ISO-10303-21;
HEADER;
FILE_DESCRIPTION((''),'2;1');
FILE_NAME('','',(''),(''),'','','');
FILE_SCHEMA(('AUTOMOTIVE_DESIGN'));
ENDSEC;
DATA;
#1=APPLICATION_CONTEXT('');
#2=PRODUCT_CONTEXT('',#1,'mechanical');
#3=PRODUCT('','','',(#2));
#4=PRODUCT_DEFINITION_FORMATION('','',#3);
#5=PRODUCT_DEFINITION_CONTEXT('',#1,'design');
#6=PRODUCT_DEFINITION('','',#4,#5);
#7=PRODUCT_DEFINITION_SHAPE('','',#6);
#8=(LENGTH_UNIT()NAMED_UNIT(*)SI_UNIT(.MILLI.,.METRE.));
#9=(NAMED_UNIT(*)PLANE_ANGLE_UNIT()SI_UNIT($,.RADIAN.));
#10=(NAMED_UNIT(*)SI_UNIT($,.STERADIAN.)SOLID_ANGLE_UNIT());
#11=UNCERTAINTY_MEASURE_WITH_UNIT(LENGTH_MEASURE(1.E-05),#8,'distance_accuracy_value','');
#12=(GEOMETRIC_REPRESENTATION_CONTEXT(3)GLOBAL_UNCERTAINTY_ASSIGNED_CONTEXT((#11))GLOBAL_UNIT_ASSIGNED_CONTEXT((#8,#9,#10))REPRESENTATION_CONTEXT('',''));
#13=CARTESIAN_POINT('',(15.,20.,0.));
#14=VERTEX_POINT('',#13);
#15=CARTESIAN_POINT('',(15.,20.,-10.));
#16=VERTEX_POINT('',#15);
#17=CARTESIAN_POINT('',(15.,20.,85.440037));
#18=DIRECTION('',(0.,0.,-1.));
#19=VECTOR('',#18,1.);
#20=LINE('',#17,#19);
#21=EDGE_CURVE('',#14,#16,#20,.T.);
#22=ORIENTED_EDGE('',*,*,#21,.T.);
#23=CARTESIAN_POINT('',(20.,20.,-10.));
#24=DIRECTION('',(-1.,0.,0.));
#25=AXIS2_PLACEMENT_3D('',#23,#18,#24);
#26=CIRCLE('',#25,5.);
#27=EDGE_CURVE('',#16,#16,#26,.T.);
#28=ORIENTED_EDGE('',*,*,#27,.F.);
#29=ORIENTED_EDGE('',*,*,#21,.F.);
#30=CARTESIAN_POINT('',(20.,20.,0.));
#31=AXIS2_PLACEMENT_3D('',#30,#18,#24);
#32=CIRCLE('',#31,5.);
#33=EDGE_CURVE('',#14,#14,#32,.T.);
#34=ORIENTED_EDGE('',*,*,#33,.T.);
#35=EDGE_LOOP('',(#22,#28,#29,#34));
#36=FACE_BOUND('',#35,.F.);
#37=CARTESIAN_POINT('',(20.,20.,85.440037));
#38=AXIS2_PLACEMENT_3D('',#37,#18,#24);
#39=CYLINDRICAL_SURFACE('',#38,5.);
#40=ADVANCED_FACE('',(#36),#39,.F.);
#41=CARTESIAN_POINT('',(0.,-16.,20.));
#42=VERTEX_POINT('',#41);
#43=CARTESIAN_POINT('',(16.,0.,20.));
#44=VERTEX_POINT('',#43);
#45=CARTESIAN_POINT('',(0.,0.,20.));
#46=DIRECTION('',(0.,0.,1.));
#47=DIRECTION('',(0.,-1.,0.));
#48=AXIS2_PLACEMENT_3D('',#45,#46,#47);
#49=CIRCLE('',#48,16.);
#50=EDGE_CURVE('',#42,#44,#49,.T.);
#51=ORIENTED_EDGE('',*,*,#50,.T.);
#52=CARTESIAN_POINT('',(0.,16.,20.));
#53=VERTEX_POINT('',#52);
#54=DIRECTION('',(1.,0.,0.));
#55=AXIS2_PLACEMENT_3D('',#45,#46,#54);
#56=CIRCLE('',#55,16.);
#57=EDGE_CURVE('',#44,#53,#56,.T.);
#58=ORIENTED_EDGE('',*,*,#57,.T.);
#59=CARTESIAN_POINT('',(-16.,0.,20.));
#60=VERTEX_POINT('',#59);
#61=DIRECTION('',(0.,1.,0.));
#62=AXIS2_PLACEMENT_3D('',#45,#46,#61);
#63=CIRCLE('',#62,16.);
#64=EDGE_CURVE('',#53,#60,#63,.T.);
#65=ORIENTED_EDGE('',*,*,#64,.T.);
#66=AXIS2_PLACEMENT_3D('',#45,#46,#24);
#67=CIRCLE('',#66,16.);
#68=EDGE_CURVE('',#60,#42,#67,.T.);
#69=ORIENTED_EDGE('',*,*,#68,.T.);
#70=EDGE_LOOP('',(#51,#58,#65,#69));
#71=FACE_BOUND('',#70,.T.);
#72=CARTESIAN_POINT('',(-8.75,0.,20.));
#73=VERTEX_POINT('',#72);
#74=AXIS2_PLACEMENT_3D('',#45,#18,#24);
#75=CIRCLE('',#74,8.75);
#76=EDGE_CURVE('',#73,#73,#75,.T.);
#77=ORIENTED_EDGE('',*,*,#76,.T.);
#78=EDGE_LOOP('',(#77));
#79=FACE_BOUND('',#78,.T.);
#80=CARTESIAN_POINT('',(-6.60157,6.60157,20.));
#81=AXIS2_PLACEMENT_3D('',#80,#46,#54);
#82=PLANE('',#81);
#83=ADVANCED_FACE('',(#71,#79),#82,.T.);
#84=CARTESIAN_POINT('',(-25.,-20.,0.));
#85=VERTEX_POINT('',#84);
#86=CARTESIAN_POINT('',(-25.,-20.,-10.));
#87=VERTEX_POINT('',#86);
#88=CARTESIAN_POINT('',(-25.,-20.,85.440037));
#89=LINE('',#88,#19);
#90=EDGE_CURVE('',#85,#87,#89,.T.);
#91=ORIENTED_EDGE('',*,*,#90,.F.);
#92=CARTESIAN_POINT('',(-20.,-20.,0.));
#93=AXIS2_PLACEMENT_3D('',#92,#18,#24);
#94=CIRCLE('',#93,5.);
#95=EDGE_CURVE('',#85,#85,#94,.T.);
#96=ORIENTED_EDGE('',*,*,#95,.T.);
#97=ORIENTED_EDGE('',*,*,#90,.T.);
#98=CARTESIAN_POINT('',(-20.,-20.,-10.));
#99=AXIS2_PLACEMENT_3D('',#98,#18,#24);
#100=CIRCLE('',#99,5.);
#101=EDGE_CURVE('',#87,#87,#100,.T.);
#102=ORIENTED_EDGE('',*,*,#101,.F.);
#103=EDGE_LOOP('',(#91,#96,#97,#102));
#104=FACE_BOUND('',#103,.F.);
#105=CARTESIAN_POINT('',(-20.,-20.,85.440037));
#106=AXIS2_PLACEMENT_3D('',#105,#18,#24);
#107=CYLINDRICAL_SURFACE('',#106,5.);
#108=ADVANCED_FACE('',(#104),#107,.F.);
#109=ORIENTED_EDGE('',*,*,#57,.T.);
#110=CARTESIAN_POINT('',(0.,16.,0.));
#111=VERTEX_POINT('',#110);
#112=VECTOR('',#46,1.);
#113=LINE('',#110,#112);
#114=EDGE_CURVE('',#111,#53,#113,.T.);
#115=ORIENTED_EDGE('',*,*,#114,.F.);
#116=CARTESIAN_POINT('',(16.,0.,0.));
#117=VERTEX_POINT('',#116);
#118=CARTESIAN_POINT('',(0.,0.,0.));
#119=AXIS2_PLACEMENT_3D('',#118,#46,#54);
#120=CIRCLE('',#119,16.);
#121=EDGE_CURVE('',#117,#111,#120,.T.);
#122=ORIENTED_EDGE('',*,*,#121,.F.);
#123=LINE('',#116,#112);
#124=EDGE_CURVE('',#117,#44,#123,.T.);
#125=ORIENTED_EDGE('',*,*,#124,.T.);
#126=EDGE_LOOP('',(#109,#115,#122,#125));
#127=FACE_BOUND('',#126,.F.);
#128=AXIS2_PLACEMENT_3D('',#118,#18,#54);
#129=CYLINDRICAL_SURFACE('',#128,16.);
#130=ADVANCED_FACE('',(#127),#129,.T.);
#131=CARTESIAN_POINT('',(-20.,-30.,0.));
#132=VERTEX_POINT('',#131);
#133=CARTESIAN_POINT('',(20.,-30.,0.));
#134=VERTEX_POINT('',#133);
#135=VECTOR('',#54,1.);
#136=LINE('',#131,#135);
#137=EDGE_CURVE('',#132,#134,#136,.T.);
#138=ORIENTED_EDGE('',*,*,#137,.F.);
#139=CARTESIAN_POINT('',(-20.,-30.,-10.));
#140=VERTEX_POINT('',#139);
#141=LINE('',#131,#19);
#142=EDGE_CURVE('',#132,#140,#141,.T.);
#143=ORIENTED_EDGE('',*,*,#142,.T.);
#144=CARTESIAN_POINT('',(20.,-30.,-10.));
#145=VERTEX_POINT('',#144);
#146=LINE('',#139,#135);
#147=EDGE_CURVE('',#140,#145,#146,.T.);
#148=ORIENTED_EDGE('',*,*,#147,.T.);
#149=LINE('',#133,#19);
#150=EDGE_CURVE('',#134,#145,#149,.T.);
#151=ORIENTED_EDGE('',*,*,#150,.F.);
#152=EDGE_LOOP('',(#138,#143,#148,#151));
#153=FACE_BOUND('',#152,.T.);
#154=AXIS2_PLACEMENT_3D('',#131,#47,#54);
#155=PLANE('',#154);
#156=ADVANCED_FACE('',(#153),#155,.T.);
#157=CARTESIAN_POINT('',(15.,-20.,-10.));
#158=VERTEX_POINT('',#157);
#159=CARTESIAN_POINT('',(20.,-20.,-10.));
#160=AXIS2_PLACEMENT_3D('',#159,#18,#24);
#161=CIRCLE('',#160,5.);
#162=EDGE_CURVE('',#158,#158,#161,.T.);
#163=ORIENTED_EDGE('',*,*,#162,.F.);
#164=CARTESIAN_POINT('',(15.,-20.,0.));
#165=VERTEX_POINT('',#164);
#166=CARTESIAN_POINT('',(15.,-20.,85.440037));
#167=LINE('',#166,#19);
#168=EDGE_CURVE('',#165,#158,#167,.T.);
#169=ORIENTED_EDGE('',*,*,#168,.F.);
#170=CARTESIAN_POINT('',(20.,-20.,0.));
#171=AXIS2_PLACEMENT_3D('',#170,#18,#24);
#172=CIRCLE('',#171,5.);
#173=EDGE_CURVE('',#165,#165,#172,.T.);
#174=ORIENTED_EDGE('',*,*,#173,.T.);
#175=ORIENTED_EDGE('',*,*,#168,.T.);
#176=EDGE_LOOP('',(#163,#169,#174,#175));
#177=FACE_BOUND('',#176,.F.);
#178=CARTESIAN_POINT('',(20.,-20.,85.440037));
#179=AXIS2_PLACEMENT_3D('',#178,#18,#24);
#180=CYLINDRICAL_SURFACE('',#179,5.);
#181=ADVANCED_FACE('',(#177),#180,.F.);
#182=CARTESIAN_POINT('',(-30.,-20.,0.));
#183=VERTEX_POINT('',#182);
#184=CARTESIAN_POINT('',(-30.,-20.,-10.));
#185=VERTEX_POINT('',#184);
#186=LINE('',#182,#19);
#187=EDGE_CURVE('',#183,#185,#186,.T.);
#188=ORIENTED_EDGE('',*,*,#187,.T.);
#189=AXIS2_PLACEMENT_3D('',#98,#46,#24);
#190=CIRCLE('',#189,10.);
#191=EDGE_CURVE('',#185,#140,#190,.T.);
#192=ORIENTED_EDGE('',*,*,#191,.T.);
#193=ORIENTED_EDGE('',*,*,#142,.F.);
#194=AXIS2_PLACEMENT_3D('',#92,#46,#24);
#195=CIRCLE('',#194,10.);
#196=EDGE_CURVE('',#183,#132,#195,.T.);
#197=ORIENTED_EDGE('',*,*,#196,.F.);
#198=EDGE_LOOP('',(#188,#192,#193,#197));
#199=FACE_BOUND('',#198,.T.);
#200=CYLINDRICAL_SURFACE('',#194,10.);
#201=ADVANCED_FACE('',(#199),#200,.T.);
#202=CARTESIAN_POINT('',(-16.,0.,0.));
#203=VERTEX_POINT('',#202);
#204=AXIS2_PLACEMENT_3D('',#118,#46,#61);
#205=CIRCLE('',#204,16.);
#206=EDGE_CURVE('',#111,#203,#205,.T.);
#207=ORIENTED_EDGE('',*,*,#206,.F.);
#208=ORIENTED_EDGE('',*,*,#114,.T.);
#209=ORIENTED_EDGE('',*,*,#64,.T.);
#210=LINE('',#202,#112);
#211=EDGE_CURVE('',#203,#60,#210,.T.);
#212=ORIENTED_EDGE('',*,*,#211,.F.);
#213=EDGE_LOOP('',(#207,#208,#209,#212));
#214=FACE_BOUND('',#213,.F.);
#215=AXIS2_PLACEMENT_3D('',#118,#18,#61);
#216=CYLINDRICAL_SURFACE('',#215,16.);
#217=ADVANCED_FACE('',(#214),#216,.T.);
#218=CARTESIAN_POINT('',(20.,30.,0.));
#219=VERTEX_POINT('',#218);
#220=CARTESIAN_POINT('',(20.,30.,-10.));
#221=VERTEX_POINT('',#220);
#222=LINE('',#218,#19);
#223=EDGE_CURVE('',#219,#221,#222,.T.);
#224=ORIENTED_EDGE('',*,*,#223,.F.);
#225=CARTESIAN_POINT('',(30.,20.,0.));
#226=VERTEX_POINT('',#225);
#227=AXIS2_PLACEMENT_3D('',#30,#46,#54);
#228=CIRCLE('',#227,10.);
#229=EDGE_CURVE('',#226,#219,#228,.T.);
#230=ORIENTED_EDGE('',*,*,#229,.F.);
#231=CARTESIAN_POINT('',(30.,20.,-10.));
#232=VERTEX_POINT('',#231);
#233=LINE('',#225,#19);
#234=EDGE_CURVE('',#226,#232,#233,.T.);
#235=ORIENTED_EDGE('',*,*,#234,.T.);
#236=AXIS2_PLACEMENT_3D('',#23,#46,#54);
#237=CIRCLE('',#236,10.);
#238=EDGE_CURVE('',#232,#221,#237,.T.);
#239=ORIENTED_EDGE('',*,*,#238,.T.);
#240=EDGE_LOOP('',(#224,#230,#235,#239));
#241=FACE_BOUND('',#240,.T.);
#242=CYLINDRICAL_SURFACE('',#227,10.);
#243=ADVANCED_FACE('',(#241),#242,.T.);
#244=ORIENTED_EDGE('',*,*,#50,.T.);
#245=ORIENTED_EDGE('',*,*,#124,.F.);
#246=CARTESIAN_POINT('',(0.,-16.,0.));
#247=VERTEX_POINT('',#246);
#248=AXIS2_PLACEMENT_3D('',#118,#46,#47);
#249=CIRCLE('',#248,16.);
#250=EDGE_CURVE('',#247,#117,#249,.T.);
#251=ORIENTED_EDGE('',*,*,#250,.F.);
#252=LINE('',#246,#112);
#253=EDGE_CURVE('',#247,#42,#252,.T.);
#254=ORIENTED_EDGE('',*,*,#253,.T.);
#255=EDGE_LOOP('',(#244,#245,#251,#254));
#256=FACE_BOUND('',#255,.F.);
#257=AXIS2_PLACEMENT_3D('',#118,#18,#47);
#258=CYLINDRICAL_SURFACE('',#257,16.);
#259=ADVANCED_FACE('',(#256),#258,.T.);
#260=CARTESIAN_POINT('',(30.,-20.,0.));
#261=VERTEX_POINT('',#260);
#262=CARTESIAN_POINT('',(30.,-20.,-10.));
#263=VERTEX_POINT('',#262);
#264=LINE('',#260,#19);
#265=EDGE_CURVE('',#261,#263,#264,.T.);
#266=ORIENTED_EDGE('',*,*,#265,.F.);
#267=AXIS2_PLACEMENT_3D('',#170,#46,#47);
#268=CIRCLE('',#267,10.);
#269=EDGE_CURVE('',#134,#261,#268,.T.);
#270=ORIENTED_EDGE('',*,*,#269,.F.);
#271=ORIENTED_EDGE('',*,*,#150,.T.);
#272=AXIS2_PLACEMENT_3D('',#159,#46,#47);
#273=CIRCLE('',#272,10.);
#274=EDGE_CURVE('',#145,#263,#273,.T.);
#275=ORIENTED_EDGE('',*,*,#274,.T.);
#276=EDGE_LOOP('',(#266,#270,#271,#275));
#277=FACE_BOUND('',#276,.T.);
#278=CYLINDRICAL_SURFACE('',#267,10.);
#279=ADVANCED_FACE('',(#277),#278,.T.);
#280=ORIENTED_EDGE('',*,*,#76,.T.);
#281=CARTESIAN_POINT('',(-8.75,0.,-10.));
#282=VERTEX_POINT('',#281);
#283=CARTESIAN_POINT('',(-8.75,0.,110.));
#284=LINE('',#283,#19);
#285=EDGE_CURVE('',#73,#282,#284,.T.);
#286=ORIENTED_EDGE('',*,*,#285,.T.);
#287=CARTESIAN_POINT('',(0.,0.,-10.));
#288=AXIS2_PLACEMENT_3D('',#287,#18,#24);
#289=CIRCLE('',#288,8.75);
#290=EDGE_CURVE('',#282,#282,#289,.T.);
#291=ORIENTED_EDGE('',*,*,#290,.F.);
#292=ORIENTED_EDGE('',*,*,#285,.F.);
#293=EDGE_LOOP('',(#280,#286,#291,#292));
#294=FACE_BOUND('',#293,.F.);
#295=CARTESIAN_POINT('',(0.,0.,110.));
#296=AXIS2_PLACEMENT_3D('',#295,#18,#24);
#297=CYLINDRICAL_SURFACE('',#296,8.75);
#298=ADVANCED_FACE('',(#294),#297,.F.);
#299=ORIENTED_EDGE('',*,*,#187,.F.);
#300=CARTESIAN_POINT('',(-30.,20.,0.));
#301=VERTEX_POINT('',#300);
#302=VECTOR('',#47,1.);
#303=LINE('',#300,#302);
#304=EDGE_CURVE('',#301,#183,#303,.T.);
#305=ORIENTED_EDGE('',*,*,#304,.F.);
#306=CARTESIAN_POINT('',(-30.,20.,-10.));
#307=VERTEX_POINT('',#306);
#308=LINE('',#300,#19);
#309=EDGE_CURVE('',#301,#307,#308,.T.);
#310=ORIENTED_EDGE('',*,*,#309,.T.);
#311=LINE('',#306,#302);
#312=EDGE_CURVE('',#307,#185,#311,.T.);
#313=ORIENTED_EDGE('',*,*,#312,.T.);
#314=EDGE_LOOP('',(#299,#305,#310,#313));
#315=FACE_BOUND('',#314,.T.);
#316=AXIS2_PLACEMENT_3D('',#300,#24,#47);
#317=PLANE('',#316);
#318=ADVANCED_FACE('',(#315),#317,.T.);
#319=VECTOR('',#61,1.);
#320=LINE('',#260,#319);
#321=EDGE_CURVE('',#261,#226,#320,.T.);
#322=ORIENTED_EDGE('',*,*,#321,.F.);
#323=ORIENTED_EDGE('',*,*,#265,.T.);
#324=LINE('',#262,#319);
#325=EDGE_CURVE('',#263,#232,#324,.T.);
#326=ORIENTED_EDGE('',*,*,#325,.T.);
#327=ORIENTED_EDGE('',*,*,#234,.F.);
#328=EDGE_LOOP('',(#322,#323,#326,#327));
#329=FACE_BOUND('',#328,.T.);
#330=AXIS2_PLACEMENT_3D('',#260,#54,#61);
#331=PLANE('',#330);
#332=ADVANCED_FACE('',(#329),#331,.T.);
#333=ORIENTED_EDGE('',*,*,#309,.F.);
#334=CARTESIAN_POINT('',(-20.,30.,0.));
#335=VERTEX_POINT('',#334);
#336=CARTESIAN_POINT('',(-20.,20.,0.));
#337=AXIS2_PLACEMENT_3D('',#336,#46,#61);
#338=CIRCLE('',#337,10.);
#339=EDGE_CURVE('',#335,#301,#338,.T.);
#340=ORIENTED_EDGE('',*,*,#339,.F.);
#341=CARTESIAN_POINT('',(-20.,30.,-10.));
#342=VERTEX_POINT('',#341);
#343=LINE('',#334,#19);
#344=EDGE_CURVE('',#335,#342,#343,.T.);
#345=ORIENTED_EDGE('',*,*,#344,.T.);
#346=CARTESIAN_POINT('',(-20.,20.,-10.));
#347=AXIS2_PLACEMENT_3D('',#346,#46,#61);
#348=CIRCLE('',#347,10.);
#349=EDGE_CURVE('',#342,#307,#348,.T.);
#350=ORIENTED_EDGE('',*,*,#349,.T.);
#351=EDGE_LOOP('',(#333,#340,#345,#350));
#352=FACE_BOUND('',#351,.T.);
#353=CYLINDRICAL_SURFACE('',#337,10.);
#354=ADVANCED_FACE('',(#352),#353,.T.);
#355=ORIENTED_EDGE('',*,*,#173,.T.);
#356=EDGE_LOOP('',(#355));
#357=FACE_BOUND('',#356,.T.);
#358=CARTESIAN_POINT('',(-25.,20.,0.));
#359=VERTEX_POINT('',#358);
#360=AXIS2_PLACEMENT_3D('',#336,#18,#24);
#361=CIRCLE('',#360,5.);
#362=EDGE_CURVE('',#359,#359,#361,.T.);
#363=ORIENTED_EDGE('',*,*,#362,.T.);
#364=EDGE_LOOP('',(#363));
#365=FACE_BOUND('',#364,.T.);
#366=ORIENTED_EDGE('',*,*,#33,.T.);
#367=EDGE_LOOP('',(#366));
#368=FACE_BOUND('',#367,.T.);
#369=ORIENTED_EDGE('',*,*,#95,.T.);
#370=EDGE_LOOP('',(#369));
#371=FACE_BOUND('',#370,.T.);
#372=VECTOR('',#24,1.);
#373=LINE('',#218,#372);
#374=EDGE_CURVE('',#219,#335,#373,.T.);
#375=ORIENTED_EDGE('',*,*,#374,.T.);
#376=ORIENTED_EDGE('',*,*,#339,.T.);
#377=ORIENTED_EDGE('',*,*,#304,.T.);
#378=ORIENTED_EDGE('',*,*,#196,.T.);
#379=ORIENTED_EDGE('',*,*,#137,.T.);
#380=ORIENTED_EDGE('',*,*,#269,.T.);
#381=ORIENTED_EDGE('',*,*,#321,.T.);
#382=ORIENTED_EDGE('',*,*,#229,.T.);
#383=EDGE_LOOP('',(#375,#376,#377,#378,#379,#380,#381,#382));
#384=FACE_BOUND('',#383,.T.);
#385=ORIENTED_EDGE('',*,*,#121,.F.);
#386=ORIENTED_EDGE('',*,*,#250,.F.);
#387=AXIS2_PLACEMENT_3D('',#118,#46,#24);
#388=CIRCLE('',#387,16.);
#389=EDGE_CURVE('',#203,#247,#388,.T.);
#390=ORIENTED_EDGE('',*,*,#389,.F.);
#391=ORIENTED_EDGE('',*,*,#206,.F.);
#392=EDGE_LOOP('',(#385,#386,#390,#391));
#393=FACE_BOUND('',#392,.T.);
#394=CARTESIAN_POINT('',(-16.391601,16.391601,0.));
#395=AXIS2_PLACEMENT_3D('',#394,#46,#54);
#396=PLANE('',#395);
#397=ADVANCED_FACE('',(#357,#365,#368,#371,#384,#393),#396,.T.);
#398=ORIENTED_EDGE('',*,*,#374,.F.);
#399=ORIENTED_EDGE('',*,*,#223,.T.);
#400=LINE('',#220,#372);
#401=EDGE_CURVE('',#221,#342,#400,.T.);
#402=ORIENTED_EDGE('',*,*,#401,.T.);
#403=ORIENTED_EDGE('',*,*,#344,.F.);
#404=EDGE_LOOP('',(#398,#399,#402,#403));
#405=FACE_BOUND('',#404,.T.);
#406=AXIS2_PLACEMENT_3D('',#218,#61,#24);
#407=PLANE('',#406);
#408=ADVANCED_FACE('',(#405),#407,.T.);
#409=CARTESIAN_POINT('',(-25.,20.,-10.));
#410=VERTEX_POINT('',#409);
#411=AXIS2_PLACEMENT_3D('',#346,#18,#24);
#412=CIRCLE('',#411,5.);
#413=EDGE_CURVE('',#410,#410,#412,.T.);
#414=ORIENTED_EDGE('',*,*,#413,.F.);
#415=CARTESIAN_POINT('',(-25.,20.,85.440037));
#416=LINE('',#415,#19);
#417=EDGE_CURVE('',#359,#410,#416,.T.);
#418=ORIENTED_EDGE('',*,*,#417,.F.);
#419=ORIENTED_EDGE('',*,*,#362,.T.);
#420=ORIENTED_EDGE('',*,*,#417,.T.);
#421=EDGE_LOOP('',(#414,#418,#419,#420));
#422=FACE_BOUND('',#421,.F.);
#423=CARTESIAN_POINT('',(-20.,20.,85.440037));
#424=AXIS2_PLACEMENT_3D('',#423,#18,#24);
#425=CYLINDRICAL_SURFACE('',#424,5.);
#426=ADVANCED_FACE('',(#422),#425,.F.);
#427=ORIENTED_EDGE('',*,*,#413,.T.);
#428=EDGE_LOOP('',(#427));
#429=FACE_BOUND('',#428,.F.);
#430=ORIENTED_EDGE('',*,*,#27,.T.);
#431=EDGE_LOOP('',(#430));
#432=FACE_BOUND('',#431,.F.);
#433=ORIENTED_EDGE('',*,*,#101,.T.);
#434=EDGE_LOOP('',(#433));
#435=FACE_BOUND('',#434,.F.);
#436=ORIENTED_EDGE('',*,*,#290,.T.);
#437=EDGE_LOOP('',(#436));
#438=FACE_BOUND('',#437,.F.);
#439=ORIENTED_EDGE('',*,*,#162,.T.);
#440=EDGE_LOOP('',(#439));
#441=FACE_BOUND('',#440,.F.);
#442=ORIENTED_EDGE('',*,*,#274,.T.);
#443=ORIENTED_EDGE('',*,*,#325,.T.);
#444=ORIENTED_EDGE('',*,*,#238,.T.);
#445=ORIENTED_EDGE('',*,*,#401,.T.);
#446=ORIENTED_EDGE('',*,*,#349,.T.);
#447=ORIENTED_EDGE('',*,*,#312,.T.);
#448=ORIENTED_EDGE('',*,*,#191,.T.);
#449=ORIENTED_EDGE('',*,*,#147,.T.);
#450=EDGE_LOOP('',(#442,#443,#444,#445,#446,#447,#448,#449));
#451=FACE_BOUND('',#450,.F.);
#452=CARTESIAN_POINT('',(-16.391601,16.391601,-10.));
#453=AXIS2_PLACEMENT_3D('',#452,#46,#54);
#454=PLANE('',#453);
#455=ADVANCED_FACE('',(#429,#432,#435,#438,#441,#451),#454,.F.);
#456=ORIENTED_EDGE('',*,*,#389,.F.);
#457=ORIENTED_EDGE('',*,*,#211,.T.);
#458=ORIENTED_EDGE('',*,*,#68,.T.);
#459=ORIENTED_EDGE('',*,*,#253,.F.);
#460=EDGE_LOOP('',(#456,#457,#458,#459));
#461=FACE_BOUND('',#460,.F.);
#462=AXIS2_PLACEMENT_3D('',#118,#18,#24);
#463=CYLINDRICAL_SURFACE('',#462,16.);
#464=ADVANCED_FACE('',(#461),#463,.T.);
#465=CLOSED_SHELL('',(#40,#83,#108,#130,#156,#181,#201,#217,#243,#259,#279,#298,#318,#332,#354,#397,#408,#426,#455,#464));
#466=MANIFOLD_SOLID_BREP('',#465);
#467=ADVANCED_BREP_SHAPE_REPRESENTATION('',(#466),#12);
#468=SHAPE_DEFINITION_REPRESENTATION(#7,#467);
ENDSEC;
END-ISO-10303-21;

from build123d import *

# Parameters (mm, degrees)
F0_R     = 5
F1_DEPTH = 10
F2_D     = 10
F3_D     = 10
F4_D     = 10
F5_D     = 10
F6_DEPTH = 20
F8_D     = 17.5


with BuildPart() as f1:
    # F0 (on Top) → F1 (new body)
    with BuildSketch(Plane.XY):
        with BuildLine():
            Line((0, 30), (-20, 30))
            ThreePointArc((-20, 30), (-27.0710678119, 27.0710678119), (-30, 20))
            Line((-30, 20), (-30, 0))
            Line((-30, 0), (-16, 0))
            ThreePointArc((-16, 0), (-11.313708499, 11.313708499), (0, 16))
            Line((0, 16), (0, 30))
        make_face()
        with Locations((-20, 20)):
            Circle(F0_R, mode=Mode.SUBTRACT)
        with BuildLine():
            Line((20, 30), (0, 30))
            Line((0, 30), (0, 16))
            ThreePointArc((0, 16), (11.313708499, 11.313708499), (16, 0))
            Line((16, 0), (30, 0))
            Line((30, 0), (30, 20))
            ThreePointArc((30, 20), (27.0710678119, 27.0710678119), (20, 30))
        make_face()
        with Locations((20, 20)):
            Circle(F0_R, mode=Mode.SUBTRACT)
        with BuildLine():
            Line((-16, 0), (-30, 0))
            Line((-30, 0), (-30, -20))
            ThreePointArc((-30, -20), (-27.0710678119, -27.0710678119), (-20, -30))
            Line((-20, -30), (0, -30))
            Line((0, -30), (0, -16))
            ThreePointArc((0, -16), (-11.313708499, -11.313708499), (-16, 0))
        make_face()
        with Locations((-20, -20)):
            Circle(F0_R, mode=Mode.SUBTRACT)
        with BuildLine():
            Line((30, 0), (16, 0))
            ThreePointArc((16, 0), (11.313708499, -11.313708499), (0, -16))
            Line((0, -16), (0, -30))
            Line((0, -30), (20, -30))
            ThreePointArc((20, -30), (27.0710678119, -27.0710678119), (30, -20))
            Line((30, -20), (30, 0))
        make_face()
        with Locations((20, -20)):
            Circle(F0_R, mode=Mode.SUBTRACT)
        with BuildLine():
            Line((0, 0), (0, 16))
            ThreePointArc((0, 16), (-11.313708499, 11.313708499), (-16, 0))
            Line((-16, 0), (0, 0))
        make_face()
        with BuildLine():
            ThreePointArc((16, 0), (11.313708499, 11.313708499), (0, 16))
            Line((0, 16), (0, 0))
            Line((0, 0), (16, 0))
        make_face()
        with BuildLine():
            ThreePointArc((0, -16), (11.313708499, -11.313708499), (16, 0))
            Line((16, 0), (0, 0))
            Line((0, 0), (0, -16))
        make_face()
        with Locations((-20, 20)):
            Circle(F0_R)
        with Locations((20, 20)):
            Circle(F0_R)
        with BuildLine():
            Line((0, 0), (-16, 0))
            ThreePointArc((-16, 0), (-11.313708499, -11.313708499), (0, -16))
            Line((0, -16), (0, 0))
        make_face()
        with Locations((20, -20)):
            Circle(F0_R)
        with Locations((-20, -20)):
            Circle(F0_R)
    extrude(amount=-F1_DEPTH)

    # F2 (through all)
    with Locations(Plane.XY):
        with Locations((-20, 20)):
            Hole(F2_D / 2)

    # F3 (through all)
    with Locations(Plane.XY):
        with Locations((20, 20)):
            Hole(F3_D / 2)

    # F4 (through all)
    with Locations(Plane.XY):
        with Locations((20, -20)):
            Hole(F4_D / 2)

    # F5 (through all)
    with Locations(Plane.XY):
        with Locations((-20, -20)):
            Hole(F5_D / 2)

    # F0 (on Top) → F6 (join)
    with BuildSketch(Plane.XY):
        with BuildLine():
            Line((0, 0), (0, 16))
            ThreePointArc((0, 16), (-11.313708499, 11.313708499), (-16, 0))
            Line((-16, 0), (0, 0))
        make_face()
        with BuildLine():
            ThreePointArc((16, 0), (11.313708499, 11.313708499), (0, 16))
            Line((0, 16), (0, 0))
            Line((0, 0), (16, 0))
        make_face()
        with BuildLine():
            ThreePointArc((0, -16), (11.313708499, -11.313708499), (16, 0))
            Line((16, 0), (0, 0))
            Line((0, 0), (0, -16))
        make_face()
        with BuildLine():
            Line((0, 0), (-16, 0))
            ThreePointArc((-16, 0), (-11.313708499, -11.313708499), (0, -16))
            Line((0, -16), (0, 0))
        make_face()
    extrude(amount=F6_DEPTH)

    # F8 (through all)
    with Locations(Plane.XY.offset(20)):
        with Locations((0, 0)):
            Hole(F8_D / 2)


solid = f1.part
